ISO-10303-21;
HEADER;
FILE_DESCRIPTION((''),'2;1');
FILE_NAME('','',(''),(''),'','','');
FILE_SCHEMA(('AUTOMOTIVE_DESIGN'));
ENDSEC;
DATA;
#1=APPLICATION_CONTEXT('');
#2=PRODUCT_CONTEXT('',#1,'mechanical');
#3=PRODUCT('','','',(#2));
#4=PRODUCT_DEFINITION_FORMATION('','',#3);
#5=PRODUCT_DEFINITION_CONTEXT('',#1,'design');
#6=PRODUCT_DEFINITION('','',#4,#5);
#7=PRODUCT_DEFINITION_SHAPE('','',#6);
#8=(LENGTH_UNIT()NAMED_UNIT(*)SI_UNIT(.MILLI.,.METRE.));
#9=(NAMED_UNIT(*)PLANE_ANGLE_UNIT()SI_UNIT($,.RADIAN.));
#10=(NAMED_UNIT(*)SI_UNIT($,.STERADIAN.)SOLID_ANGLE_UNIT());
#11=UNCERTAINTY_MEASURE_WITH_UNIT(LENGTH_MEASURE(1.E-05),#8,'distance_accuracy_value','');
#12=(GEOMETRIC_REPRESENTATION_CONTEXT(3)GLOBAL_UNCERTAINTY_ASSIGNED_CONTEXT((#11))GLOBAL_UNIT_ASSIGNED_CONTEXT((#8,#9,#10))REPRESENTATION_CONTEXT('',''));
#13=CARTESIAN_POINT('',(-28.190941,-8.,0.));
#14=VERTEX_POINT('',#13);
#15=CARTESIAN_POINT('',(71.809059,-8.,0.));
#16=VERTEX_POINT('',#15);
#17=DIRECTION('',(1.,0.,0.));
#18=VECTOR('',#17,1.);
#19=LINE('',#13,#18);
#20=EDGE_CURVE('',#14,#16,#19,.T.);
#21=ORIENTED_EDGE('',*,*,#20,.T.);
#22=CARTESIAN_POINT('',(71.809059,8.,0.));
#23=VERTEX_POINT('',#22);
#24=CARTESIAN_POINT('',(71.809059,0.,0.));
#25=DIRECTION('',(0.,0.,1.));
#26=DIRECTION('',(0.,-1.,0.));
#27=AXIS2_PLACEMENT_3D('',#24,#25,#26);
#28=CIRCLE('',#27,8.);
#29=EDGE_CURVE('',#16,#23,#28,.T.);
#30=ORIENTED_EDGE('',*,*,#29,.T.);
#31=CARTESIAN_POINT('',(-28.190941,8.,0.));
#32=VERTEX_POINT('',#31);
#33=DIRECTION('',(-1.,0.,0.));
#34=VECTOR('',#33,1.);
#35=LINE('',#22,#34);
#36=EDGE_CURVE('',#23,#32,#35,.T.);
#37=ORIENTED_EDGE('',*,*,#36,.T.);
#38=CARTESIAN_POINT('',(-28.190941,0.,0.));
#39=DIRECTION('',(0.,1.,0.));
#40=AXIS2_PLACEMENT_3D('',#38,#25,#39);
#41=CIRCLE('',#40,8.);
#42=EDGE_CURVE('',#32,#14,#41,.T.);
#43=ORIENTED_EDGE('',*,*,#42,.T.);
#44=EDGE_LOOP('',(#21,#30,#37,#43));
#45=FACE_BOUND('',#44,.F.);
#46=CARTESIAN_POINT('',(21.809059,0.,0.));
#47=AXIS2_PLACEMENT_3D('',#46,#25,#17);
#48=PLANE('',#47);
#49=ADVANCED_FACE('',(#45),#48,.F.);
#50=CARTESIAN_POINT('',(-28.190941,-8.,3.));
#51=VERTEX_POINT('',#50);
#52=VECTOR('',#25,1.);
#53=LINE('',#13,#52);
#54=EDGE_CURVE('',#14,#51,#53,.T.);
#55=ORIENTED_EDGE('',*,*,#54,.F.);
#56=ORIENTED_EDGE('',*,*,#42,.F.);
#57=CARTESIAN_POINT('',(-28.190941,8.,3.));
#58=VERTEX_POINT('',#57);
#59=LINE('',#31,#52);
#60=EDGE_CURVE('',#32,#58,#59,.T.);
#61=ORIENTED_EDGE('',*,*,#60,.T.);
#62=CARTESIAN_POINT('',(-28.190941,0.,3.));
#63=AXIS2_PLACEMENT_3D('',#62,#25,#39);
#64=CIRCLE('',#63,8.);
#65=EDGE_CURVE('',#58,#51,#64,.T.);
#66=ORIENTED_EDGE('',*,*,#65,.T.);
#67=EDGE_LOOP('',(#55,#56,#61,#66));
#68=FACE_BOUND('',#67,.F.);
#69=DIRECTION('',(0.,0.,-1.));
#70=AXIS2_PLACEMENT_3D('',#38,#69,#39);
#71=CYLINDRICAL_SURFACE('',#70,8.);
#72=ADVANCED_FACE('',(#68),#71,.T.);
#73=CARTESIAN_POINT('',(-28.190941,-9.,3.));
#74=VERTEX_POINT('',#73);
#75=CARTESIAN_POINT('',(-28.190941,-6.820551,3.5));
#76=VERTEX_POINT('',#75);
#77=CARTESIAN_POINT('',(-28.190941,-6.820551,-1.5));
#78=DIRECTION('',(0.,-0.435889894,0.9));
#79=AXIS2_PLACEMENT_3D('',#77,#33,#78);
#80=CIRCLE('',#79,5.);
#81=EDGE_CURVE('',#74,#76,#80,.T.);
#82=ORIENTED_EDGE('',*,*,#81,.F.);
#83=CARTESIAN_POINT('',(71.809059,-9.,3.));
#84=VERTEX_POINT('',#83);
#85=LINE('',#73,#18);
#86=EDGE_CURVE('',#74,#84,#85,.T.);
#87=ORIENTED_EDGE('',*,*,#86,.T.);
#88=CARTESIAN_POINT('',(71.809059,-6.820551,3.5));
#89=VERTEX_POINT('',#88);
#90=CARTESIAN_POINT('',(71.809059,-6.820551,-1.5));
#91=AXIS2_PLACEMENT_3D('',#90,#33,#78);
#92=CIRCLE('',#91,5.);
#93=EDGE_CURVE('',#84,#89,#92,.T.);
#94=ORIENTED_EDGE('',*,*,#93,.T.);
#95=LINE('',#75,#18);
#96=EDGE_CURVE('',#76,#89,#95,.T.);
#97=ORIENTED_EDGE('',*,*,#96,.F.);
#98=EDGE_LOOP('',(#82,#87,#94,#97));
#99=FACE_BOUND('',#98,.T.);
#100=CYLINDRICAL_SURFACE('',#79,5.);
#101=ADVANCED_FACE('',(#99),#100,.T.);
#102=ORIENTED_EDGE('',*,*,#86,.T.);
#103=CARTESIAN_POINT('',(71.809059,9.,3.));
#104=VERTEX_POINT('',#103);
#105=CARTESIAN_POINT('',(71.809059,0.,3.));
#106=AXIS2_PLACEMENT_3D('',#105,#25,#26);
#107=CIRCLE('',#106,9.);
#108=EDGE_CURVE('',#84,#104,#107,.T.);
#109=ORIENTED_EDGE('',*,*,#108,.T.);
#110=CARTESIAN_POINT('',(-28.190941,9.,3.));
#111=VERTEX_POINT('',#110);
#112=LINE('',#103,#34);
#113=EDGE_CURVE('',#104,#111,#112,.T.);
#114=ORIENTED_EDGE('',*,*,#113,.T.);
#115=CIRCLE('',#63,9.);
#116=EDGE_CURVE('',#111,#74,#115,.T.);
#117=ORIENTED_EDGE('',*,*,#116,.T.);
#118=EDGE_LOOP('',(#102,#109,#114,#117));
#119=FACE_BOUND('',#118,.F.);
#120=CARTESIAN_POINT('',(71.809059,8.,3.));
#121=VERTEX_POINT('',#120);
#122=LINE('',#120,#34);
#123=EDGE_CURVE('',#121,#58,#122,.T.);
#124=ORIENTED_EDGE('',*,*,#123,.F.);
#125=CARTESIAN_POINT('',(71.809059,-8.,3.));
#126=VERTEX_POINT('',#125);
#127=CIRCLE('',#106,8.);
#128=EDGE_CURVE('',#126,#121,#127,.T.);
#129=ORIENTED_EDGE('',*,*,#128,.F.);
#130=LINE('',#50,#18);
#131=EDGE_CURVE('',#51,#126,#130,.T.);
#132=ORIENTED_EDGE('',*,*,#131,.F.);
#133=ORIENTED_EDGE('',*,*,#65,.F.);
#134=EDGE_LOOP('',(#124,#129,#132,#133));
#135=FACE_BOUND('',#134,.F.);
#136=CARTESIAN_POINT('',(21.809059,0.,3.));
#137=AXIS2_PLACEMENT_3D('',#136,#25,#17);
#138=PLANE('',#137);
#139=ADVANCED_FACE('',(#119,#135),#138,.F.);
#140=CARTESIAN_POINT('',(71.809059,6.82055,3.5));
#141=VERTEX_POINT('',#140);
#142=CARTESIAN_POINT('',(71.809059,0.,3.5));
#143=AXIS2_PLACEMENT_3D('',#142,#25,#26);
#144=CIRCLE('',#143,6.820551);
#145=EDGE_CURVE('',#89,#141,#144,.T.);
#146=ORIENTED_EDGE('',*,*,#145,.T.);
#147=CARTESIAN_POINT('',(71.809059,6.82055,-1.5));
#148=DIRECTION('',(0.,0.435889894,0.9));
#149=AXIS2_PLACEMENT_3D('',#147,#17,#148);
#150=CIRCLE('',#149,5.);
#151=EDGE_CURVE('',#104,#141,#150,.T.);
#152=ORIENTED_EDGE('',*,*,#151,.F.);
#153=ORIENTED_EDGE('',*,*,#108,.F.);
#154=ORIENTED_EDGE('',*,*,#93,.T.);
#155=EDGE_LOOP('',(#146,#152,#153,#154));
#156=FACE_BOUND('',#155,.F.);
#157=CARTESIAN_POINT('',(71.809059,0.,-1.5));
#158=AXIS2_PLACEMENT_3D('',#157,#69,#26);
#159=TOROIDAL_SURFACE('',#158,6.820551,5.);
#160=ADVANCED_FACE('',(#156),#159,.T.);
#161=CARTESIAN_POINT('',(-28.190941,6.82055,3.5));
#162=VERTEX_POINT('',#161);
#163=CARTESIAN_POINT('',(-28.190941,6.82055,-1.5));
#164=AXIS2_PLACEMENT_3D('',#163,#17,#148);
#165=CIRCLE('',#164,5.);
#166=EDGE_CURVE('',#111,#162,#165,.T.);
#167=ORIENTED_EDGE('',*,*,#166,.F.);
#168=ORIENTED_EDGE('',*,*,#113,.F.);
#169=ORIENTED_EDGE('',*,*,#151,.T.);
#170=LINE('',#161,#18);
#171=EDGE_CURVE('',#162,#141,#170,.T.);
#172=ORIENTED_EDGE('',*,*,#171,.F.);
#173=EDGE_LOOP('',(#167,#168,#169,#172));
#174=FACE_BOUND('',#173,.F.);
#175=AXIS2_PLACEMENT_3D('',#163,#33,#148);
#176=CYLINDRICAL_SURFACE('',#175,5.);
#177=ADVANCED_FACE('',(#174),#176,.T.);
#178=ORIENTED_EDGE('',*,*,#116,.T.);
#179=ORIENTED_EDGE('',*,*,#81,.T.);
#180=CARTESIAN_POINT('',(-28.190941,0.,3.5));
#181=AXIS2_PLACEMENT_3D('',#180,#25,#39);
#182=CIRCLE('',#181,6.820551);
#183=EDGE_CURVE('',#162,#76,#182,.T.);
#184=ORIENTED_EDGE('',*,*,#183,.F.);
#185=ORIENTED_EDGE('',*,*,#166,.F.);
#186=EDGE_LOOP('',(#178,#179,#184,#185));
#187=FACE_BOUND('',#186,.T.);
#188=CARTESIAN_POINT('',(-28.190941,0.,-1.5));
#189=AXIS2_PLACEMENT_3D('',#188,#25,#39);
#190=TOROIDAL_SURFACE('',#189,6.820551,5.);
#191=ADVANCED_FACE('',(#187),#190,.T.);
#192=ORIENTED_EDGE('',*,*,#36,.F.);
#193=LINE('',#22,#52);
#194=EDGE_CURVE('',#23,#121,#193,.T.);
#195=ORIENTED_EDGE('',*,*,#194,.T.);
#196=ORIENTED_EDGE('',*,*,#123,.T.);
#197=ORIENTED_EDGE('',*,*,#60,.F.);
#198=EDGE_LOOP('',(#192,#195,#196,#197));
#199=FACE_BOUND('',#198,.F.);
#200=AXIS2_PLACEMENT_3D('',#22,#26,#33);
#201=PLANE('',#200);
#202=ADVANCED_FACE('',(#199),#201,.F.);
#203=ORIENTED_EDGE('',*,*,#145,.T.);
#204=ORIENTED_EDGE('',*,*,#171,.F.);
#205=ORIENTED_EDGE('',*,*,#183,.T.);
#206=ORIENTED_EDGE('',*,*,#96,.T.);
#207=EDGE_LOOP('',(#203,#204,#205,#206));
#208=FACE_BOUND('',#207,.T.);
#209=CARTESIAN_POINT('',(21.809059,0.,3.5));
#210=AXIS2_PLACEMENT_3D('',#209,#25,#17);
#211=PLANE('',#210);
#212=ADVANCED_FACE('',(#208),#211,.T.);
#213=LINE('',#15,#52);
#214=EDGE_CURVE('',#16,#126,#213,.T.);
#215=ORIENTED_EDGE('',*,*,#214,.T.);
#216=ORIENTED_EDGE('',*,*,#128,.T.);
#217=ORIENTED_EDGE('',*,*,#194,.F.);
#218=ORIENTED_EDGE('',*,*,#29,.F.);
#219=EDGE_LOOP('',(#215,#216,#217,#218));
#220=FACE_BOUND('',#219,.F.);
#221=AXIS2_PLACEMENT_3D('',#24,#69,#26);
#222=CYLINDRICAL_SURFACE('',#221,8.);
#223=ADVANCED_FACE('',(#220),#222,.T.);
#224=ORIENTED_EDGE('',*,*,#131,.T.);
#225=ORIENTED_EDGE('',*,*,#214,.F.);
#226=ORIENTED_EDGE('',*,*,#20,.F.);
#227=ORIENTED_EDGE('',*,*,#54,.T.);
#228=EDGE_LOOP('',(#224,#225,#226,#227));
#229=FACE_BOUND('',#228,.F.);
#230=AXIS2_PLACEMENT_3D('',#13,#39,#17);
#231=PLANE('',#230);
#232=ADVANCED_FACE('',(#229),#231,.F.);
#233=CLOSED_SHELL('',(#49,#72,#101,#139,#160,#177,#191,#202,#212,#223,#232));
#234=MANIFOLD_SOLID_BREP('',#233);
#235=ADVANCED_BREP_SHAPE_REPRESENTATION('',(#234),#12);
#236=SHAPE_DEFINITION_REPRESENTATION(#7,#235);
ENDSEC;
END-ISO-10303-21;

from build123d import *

# Parameters (mm, degrees)
F1_DEPTH    = 3
F3_DEPTH    = 0.5
F4_T1_DEPTH = 100
F4_T4_ANGLE = 180
F4_T6_ANGLE = 180


# Not quite as in the source:
# - a fillet or chamfer that OpenCascade refuses, or shapes differently, is made with other operations: its cross-section is extruded or revolved along the edge and cut away or added


with BuildPart() as f1:
    # F0 (on Top) → F1 (new body)
    with BuildSketch(Plane.XY):
        with BuildLine():
            Line((71.8090593611, 7.9999995343), (-28.1909406389, 7.9999995343))
            ThreePointArc((-28.1909406389, 7.9999995343), (-36.1909406389, -4.657e-07), (-28.1909406389, -8.0000004657))
            Line((-28.1909406389, -8.0000004657), (71.8090593611, -8.0000004657))
            ThreePointArc((71.8090593611, -8.0000004657), (79.8090593611, -4.657e-07), (71.8090593611, 7.9999995343))
        make_face()
    extrude(amount=F1_DEPTH)

    # F2 (on face) → F3 (join)
    with BuildSketch(Plane.XY.offset(3)):
        with BuildLine():
            Line((71.8090593611, 8.9999995343), (-28.1909406389, 8.9999995343))
            ThreePointArc((-28.1909406389, 8.9999995343), (-37.1909406389, -4.657e-07), (-28.1909406389, -9.0000004657))
            Line((-28.1909406389, -9.0000004657), (71.8090593611, -9.0000004657))
            ThreePointArc((71.8090593611, -9.0000004657), (80.8090593611, -4.657e-07), (71.8090593611, 8.9999995343))
        make_face()
        with BuildLine():
            Line((-28.1909406389, 7.9999995343), (71.8090593611, 7.9999995343))
            ThreePointArc((71.8090593611, 7.9999995343), (79.8090593611, -4.657e-07), (71.8090593611, -8.0000004657))
            Line((71.8090593611, -8.0000004657), (-28.1909406389, -8.0000004657))
            ThreePointArc((-28.1909406389, -8.0000004657), (-36.1909406389, -4.657e-07), (-28.1909406389, 7.9999995343))
        make_face(mode=Mode.SUBTRACT)
        with BuildLine():
            ThreePointArc((71.8090593611, -8.0000004657), (79.8090593611, -4.657e-07), (71.8090593611, 7.9999995343))
            Line((71.8090593611, 7.9999995343), (-28.1909406389, 7.9999995343))
            ThreePointArc((-28.1909406389, 7.9999995343), (-36.1909406389, -4.657e-07), (-28.1909406389, -8.0000004657))
            Line((-28.1909406389, -8.0000004657), (71.8090593611, -8.0000004657))
        make_face()
    extrude(amount=F3_DEPTH)

    # F4: fillet of radius 5 on 4 edges, made by hand

    # F4_s2 → F4_t1 (cut)
    with BuildSketch(Plane.YZ.offset(-28.1909406389)):
        with BuildLine():
            ThreePointArc((-9.0000004657, 3), (-7.9385849826, 3.3733971724), (-6.8205509939, 3.5))
            Line((-6.8205509939, 3.5), (-9.0000004657, 3.5))
            Line((-9.0000004657, 3.5), (-9.0000004657, 3))
        make_face()
        with BuildLine():
            ThreePointArc((8.9999995343, 3), (7.9385840513, 3.3733971724), (6.8205500626, 3.5))
            Line((6.8205500626, 3.5), (8.9999995343, 3.5))
            Line((8.9999995343, 3.5), (8.9999995343, 3))
        make_face()
    extrude(amount=F4_T1_DEPTH, mode=Mode.SUBTRACT)

    # F4_s3 → F4_t4 (revolve, cut)
    with BuildSketch(Plane.YZ.offset(-28.1909406389)):
        with BuildLine():
            ThreePointArc((8.9999995343, 3), (7.9385840513, 3.3733971724), (6.8205500626, 3.5))
            Line((6.8205500626, 3.5), (8.9999995343, 3.5))
            Line((8.9999995343, 3.5), (8.9999995343, 3))
        make_face()
    revolve(axis=Axis((-28.1909406389, -4.657e-07, 3.5), (0, 0, 1)), revolution_arc=F4_T4_ANGLE, mode=Mode.SUBTRACT)

    # F4_s5 → F4_t6 (revolve, cut)
    with BuildSketch(Plane.YZ.offset(71.8090593611)):
        with BuildLine():
            ThreePointArc((-6.8205509939, 3.5), (-7.9385849826, 3.3733971724), (-9.0000004657, 3))
            Line((-9.0000004657, 3), (-9.0000004657, 3.5))
            Line((-9.0000004657, 3.5), (-6.8205509939, 3.5))
        make_face()
    revolve(axis=Axis((71.8090593611, -4.657e-07, 3.5), (0, 0, 1)), revolution_arc=F4_T6_ANGLE, mode=Mode.SUBTRACT)


solid = f1.part
